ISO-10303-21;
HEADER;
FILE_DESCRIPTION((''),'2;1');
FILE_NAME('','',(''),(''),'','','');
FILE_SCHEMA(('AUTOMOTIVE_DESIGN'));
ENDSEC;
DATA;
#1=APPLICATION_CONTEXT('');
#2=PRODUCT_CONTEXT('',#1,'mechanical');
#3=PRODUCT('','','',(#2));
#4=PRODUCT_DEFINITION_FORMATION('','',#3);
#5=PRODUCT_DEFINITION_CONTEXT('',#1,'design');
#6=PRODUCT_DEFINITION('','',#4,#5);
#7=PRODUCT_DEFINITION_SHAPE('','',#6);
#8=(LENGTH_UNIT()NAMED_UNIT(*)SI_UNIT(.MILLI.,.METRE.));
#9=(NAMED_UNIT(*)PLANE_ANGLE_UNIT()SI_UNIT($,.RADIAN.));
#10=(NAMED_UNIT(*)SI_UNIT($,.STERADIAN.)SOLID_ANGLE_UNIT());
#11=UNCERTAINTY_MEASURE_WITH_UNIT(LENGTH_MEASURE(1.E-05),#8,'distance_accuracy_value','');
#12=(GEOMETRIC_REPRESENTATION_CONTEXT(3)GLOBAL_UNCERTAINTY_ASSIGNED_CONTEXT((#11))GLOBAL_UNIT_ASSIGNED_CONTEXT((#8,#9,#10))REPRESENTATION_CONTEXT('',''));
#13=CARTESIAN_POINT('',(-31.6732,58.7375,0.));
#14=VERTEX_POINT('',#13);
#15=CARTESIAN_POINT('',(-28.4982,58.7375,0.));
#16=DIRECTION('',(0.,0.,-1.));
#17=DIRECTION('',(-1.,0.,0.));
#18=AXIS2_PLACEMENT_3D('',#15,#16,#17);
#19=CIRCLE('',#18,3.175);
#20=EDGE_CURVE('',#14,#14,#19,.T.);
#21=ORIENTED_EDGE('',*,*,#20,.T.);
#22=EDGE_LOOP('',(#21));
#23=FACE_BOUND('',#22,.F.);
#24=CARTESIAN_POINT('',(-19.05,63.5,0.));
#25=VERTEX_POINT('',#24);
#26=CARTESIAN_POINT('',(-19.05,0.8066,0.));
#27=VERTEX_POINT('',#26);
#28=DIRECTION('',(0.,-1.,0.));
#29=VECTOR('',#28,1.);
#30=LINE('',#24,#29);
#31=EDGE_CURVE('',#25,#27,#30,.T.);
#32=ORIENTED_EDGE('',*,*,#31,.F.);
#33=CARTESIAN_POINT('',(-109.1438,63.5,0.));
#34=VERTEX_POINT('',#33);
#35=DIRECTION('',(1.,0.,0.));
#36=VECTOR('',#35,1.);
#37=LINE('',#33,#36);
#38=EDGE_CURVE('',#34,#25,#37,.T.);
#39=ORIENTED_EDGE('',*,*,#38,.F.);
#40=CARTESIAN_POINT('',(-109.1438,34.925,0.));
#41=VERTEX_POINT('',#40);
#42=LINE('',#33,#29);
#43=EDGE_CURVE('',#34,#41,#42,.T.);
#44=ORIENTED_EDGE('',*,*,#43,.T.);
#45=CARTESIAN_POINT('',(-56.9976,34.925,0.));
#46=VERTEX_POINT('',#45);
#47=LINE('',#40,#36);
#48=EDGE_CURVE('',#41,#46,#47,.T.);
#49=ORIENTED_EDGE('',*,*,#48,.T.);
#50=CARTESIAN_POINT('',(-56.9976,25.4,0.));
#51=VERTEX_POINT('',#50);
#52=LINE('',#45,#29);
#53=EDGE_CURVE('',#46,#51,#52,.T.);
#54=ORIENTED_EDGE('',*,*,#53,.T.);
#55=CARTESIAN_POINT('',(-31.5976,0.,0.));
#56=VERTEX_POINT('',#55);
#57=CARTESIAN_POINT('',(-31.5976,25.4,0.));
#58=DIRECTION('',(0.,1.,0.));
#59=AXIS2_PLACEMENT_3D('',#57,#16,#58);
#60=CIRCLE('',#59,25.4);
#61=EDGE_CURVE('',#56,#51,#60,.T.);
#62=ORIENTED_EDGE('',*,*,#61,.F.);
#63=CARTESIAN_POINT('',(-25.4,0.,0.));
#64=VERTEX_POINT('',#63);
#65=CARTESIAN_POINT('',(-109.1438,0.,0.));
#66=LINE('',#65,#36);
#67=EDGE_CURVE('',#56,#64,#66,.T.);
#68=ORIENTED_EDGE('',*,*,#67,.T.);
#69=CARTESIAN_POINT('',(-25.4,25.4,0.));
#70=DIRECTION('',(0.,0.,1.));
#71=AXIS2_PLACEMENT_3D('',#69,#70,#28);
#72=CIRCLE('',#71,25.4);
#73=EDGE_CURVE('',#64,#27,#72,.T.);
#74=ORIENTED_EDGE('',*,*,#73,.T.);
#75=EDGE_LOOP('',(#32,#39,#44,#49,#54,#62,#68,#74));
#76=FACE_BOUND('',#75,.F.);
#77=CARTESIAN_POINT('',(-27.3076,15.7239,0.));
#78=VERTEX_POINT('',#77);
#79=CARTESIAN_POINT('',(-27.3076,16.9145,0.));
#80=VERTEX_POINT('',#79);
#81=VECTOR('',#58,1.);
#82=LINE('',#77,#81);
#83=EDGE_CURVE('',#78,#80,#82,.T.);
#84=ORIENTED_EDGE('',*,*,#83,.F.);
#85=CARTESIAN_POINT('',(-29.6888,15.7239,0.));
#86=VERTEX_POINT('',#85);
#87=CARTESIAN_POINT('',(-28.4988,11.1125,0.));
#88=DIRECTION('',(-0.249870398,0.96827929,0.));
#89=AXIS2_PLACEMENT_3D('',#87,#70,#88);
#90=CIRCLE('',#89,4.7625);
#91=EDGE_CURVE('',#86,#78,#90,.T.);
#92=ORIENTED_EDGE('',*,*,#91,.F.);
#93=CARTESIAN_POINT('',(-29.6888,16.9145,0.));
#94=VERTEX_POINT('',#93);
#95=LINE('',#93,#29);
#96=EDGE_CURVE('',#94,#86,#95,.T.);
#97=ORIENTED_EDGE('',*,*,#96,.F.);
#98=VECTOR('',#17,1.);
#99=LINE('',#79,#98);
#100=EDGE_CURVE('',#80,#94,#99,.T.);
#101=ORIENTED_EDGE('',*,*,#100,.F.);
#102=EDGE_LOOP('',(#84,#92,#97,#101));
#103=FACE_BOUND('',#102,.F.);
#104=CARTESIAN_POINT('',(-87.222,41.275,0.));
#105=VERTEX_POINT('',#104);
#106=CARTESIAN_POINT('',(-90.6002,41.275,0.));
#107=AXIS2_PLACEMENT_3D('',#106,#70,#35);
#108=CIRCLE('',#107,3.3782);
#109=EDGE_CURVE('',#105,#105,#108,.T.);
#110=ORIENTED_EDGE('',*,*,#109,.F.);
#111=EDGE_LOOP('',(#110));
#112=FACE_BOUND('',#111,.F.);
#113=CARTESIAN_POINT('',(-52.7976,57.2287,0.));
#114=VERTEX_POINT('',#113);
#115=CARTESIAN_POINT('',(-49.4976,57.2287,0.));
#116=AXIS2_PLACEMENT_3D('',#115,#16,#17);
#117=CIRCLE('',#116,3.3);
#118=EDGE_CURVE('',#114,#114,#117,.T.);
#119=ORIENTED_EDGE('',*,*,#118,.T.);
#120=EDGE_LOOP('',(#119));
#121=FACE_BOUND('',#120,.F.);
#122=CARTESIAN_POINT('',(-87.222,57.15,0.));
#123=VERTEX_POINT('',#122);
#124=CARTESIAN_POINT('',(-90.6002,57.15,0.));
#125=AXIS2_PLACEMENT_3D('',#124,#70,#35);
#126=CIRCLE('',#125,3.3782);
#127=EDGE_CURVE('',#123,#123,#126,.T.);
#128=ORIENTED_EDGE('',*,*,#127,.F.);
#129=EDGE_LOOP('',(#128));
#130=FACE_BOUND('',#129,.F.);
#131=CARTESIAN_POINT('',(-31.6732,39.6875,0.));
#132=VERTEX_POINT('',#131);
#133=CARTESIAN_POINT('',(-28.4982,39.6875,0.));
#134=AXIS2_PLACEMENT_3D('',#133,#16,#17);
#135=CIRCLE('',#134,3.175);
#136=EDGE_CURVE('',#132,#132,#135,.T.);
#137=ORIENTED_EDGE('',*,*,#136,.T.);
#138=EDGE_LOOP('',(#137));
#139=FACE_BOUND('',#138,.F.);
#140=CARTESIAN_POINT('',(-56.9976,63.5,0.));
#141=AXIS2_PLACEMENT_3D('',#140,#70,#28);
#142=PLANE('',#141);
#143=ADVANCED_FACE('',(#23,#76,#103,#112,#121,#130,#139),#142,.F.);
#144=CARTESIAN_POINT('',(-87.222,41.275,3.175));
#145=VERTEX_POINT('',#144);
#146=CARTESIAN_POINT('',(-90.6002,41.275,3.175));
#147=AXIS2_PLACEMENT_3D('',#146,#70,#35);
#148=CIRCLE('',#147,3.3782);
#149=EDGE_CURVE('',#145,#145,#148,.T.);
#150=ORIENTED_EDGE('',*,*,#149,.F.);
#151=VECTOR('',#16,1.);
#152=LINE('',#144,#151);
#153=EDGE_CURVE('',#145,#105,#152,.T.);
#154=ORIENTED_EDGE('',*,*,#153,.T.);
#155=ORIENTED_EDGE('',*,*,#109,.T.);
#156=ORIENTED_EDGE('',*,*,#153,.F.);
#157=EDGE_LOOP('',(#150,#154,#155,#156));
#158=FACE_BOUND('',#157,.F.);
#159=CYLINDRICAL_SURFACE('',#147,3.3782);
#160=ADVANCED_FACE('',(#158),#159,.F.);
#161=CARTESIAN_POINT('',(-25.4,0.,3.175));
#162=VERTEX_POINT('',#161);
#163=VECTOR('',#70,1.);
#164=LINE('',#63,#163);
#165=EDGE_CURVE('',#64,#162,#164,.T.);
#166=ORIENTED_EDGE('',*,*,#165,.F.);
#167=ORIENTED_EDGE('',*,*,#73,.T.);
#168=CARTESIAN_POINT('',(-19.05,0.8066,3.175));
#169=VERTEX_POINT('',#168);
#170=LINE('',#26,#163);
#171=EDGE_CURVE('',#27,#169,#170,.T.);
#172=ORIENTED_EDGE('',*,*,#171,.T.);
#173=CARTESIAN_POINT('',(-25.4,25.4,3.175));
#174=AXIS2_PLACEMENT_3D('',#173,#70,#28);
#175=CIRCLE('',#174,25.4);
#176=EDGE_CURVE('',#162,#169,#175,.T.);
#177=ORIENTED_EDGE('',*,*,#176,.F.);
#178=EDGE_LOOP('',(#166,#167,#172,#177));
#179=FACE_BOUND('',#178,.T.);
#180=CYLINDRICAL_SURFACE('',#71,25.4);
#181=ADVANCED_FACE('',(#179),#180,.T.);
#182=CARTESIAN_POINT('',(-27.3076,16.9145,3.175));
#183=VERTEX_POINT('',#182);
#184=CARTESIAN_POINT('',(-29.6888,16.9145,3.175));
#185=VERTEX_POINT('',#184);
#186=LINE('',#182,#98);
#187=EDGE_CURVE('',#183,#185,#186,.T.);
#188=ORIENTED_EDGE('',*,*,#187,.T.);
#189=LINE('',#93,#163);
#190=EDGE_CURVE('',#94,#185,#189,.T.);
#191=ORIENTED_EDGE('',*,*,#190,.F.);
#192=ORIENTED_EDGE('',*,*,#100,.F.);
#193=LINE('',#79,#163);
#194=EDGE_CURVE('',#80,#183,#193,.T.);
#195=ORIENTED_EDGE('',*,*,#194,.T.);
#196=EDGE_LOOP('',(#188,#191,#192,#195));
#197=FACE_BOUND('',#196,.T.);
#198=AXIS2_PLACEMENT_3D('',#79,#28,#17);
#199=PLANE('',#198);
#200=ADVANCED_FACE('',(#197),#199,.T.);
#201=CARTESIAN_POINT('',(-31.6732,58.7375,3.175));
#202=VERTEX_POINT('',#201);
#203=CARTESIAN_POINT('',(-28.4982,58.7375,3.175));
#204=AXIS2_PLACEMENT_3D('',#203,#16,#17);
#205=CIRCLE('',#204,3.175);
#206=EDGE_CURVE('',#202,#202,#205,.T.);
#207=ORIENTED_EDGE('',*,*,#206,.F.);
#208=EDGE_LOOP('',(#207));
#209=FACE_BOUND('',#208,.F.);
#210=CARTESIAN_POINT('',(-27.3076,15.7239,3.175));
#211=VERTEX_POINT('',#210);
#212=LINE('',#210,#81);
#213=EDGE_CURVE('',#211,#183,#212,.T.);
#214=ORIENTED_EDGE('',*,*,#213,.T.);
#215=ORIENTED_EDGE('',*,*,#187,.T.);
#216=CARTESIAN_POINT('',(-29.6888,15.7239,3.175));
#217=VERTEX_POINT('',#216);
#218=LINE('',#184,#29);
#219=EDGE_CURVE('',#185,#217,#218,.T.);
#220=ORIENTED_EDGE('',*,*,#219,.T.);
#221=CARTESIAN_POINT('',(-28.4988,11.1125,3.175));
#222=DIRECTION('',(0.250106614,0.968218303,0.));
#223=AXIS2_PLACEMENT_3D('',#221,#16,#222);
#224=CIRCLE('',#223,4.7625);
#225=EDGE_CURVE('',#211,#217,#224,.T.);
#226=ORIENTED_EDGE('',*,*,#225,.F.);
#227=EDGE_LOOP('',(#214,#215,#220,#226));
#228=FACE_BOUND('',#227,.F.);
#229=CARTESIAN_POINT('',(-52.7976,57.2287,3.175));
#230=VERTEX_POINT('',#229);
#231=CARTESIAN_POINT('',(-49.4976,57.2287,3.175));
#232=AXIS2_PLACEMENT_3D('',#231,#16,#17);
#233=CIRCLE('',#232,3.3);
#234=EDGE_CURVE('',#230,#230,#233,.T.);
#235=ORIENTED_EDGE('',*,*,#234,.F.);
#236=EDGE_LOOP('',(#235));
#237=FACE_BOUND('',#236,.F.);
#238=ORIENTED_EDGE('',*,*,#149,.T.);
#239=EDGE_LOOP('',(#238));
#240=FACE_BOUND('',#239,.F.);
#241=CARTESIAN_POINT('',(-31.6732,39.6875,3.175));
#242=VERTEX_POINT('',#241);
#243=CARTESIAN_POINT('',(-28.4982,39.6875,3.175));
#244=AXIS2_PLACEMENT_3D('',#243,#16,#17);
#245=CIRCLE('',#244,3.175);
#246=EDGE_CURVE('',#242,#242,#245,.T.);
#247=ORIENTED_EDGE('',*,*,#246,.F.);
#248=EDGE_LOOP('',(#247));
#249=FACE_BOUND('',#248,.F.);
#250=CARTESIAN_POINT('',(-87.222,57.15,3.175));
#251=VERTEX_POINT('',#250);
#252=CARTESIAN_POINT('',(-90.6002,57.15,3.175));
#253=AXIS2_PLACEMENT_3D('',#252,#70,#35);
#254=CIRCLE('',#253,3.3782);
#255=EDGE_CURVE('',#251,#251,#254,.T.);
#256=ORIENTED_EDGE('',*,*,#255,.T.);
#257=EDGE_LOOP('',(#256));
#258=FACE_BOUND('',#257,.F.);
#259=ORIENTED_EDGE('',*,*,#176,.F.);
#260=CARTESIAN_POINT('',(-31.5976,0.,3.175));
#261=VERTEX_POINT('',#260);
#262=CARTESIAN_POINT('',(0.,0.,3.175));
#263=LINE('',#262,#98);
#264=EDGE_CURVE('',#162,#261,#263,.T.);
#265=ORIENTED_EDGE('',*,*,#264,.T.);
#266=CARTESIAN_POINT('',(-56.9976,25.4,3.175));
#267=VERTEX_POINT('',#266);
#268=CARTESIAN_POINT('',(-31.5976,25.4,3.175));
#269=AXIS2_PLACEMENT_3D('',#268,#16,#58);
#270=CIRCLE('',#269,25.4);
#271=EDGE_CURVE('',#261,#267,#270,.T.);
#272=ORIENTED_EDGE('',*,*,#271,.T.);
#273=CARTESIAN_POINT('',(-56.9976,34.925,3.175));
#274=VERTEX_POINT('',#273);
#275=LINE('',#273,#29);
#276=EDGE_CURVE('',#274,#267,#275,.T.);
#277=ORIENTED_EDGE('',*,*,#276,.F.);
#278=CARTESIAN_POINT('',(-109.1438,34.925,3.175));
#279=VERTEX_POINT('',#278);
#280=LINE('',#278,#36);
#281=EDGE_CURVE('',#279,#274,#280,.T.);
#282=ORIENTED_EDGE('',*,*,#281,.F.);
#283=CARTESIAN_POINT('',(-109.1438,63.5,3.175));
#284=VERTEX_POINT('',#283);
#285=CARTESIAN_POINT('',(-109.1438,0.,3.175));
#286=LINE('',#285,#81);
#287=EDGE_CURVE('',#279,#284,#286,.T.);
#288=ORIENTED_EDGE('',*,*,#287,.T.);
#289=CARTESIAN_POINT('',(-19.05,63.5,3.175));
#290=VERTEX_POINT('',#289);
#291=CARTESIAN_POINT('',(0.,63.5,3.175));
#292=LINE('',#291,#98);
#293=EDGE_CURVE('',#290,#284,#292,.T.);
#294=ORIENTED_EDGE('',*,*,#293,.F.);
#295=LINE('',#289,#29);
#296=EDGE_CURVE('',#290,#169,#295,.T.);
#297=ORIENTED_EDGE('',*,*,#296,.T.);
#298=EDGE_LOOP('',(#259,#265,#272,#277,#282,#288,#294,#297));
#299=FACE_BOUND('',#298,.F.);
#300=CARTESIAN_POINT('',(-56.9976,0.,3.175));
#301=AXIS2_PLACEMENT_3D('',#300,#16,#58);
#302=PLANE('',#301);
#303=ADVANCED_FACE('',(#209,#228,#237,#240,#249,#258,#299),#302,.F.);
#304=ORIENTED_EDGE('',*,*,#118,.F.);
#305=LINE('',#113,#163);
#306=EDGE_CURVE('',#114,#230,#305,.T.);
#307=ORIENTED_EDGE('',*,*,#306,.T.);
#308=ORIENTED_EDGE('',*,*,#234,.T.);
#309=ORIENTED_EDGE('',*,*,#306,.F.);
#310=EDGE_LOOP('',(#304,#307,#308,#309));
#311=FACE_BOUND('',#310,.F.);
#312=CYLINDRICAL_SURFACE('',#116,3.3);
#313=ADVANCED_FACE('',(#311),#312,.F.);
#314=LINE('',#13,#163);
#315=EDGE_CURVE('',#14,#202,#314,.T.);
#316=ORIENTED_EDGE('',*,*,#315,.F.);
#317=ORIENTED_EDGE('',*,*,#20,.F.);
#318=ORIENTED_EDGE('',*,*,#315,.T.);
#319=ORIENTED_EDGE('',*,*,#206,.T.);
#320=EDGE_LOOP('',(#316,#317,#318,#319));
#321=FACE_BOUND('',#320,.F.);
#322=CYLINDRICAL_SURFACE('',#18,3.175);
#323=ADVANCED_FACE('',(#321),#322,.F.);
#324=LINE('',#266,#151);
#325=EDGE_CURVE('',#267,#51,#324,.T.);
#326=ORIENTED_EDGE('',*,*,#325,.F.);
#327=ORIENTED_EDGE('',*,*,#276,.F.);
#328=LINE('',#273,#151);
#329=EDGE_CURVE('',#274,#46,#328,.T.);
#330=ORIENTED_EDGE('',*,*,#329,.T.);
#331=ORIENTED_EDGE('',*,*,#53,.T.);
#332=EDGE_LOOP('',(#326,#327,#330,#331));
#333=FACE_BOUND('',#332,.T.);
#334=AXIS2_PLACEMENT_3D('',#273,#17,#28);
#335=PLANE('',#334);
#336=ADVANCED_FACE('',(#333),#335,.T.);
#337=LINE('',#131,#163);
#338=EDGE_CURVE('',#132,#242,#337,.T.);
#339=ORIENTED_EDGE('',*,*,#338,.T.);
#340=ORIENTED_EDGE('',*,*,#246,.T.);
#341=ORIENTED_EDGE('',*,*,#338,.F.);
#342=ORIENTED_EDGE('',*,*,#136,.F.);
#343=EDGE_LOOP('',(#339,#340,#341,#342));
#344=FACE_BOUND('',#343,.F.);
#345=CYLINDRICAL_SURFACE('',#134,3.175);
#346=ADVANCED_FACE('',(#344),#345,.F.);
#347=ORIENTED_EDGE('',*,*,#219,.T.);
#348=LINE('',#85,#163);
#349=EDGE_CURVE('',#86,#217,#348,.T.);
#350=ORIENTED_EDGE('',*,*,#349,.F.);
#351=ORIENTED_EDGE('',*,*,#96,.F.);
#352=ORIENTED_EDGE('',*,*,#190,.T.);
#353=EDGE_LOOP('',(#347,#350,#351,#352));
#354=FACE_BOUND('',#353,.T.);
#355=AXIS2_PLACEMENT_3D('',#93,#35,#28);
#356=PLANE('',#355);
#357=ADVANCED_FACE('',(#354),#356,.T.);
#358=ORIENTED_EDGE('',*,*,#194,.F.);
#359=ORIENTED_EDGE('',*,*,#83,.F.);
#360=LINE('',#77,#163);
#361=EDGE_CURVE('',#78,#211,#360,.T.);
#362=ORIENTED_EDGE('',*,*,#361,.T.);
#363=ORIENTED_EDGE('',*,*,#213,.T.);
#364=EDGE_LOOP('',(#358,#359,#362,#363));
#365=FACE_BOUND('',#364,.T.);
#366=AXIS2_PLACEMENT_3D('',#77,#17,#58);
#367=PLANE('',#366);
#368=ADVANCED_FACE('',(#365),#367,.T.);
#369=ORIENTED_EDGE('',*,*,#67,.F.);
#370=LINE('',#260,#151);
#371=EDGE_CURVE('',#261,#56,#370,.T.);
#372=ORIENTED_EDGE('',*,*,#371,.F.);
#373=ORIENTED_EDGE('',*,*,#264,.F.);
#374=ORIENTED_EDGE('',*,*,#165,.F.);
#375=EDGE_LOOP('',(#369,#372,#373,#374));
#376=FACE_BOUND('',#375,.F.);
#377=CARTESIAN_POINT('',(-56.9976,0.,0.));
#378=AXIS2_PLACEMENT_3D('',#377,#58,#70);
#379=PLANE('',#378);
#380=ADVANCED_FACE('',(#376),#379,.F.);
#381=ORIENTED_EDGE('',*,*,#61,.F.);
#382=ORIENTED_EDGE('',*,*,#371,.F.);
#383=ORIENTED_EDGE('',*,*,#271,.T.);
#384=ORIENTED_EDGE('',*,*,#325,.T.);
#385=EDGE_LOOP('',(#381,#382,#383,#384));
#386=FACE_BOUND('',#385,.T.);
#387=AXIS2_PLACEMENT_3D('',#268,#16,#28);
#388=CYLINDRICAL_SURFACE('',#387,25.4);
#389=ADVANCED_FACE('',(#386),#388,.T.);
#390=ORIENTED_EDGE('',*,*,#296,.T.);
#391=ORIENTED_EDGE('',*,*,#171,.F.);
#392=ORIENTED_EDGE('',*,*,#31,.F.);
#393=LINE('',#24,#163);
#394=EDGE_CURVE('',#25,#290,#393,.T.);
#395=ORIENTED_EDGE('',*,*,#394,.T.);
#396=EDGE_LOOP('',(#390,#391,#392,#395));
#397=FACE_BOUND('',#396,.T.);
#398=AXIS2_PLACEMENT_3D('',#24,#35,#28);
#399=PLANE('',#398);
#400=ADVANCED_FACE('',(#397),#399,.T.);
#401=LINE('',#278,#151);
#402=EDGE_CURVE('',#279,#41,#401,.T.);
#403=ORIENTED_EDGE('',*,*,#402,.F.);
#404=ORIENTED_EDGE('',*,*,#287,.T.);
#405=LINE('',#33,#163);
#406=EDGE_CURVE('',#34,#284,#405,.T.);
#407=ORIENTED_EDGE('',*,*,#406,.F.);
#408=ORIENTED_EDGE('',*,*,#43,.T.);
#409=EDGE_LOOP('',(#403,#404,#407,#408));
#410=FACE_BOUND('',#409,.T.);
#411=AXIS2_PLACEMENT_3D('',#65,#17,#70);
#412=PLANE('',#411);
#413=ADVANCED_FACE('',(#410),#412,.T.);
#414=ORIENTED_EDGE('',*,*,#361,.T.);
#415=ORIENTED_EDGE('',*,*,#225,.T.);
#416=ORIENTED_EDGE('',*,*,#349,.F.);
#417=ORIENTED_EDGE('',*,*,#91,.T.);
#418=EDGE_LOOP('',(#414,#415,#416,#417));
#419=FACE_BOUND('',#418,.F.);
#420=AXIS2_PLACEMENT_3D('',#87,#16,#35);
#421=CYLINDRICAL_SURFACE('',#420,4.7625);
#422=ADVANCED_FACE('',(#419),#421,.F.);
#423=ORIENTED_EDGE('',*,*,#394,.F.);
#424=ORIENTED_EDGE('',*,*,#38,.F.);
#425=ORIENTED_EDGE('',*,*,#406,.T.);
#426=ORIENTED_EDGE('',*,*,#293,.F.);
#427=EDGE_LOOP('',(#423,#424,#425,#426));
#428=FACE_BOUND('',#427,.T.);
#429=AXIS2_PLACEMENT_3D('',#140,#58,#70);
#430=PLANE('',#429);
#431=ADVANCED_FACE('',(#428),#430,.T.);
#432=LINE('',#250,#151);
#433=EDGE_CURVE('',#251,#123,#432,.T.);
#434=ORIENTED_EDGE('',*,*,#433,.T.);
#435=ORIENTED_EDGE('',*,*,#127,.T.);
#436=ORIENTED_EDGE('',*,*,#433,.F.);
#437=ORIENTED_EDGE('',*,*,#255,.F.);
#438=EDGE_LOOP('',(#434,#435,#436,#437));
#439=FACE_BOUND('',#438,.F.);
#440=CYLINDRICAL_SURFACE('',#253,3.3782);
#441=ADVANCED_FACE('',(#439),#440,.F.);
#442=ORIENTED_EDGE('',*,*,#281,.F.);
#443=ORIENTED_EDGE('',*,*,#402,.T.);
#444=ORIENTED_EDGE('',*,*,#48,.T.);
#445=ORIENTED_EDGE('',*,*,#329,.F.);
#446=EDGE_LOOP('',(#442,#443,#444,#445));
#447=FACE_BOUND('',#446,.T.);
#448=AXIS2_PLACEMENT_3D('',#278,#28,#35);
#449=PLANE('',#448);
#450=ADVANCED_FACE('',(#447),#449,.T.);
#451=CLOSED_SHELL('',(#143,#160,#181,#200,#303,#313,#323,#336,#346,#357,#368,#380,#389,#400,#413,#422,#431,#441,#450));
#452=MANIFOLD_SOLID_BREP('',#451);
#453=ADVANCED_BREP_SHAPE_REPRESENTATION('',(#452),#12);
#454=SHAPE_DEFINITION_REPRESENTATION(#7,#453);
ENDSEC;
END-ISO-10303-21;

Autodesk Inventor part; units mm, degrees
ref_plane "YZ Plane" through (0, 0, 0) normal (1, 0, 0) x (0, 1, 0)
ref_plane "XZ Plane" through (0, 0, 0) normal (0, 1, 0) x (-1, 0, 0)
sketch "Sketch1" plane through (0, 0, 0) normal (0, 0, 1) x (1, 0, 0)
  line L0 (-56.9976, 63.5) -> (0, 63.5)
  line L1 (0, 63.5) -> (-7.493, 63.5)
  line L2 (-7.493, 63.5) -> (-7.493, 57.15)
  line L3 (-56.9976, 63.5) -> (-49.5046, 63.5)
  line L4 (-49.5046, 63.5) -> (-49.5046, 57.15)
  line L5 (-56.9976, 63.5) -> (-56.9976, 0)
  line L6 (-56.9976, 0) -> (0, 0)
  line L7 (0, 0) -> (0, 63.5)
  line L8 (-28.4988, 0) -> (-28.4988, 11.1125)
  circle A0 centre (-28.4988, 11.1125) radius 4.7625
  dimension "d3" = 7.493
  dimension "d4" = 6.35
  dimension "d5" = 7.493
  dimension "d19" = 6.35
  dimension "d60" = 63.5
  dimension "d61" = 11.1125
  dimension "d62" = 9.525
extrude "Plate6" add sketch "Sketch1" along normal blind 3.175
sketch "Sketch6" plane through (0, 0, 0) normal (0, 0, -1) x (-1, 0, 0)
  line L0 (56.9976, 63.5) -> (56.9976, 0) projected
  line L1 (28.4988, 11.1125) -> (27.3076, 11.1125)
  line L2 (28.4988, 11.1125) -> (29.6894, 11.1125)
  circle A0 centre (28.4988, 11.1125) radius 4.7625
  circle A1 centre (28.4988, 11.1125) radius 4.7625 projected
  line L3 (27.3076, 11.1125) -> (29.6888, 11.1125)
  line L4 (29.6888, 11.1125) -> (29.6888, 15.7239)
  line L5 (29.6888, 15.7239) -> (27.3076, 15.7239)
  line L6 (27.3076, 15.7239) -> (27.3076, 11.1125)
  line L7 (27.3076, 15.7239) -> (27.3076, 16.9145)
  line L8 (27.3076, 16.9145) -> (29.6888, 16.9145)
  line L9 (29.6888, 16.9145) -> (29.6888, 15.7239)
  point P0 (27.2012, 15.6948)
  point P1 (30.5454, 15.4129)
  dimension "d82" = 1.1906
  dimension "d86" = 2.3813
  dimension "d87" = 1.1906
extrude "Cut1" cut sketch "Sketch6" against normal blind 3.175 contours L7 L8 L9 A0 | A0 L5
sketch "Sketch7" plane through (-56.9976, 0, 0) normal (-1, 0, 0) x (0, 0, 1)
  line L0 (3.175, 0) -> (3.175, 63.5) projected
  line L1 (0, 63.5) -> (3.175, 63.5) projected
  line L2 (0, 63.5) -> (0, 0) projected
  line L3 (0, 0) -> (3.175, 0) projected
extrude "Extrusion2" add sketch "Sketch7" along normal blind 52.1462
sketch "Sketch8" plane through (0, 0, 3.175) normal (0, 0, 1) x (1, 0, 0)
  line L0 (0, 0) -> (-109.1438, 0) projected
  line L1 (-109.1438, 0) -> (-109.1438, 63.5) projected
  line L2 (-109.1438, 63.5) -> (-109.1438, 34.925)
  line L3 (-109.1438, 34.925) -> (-56.9976, 34.925)
  line L4 (-56.9976, 34.925) -> (-56.9976, 0)
  circle A0 centre (-75.5412, 57.15) radius 3.3782 projected
  circle A1 centre (-75.5412, 41.275) radius 3.3782 projected
  dimension "d71" = 28.575
  dimension "d72" = 52.1462
sketch "Sketch9" plane through (0, 0, 0) normal (0, 0, -1) x (-1, 0, 0)
  circle A0 centre (49.4976, 57.2287) radius 3.3
  circle A1 centre (7.4976, 57.2287) radius 3.3
extrude "Cut3" cut sketch "Sketch9" against normal blind 3.175
extrude "Cut4" cut sketch "Sketch8" against normal blind 3.175 contours L0 L1 L3 L4
sketch "Sketch10" plane through (0, 0, 3.175) normal (0, 0, 1) x (1, 0, 0)
  circle A0 centre (-90.6002, 57.15) radius 3.3782 projected
  circle A1 centre (-90.6002, 41.275) radius 3.3782 projected
extrude "Cut5" cut sketch "Sketch10" against normal blind 3.175
fillet "Fillet1" radius 25.4 2 edges at (-56.9976, 0, 1.5875) (0, 0, 1.5875)
sketch "Sketch11" plane through (0, 0, 3.175) normal (0, 0, 1) x (1, 0, 0)
  circle A0 centre (-90.6002, 57.15) radius 3.3782 projected
  circle A1 centre (-90.6002, 41.275) radius 3.3782 projected
  arc A2 (-25.4, 0) -> (0, 25.4) centre (-25.4, 25.4) ccw projected
  line L0 (0, 63.5) -> (0, 25.4) projected
  line L1 (-109.1438, 63.5) -> (0, 63.5) projected
  line L2 (-109.1438, 34.925) -> (-109.1438, 63.5) projected
  line L3 (-109.1438, 34.925) -> (-56.9976, 34.925) projected
  line L4 (-56.9976, 34.925) -> (-56.9976, 25.4) projected
  arc A3 (-56.9976, 25.4) -> (-31.5976, 0) centre (-31.5976, 25.4) ccw projected
  line L5 (-25.4, 0) -> (-31.5976, 0) projected
  circle A4 centre (-49.4976, 57.2287) radius 3.3 projected
  circle A5 centre (-7.4976, 57.2287) radius 3.3 projected
  line L6 (-29.6888, 15.7239) -> (-29.6888, 16.9145) projected
  line L7 (-29.6888, 16.9145) -> (-27.3076, 16.9145) projected
  line L8 (-27.3076, 16.9145) -> (-27.3076, 15.7239) projected
  line L9 (-27.3076, 15.7239) -> (-27.3088, 15.7239) projected
  arc A6 (-29.6888, 15.7239) -> (-27.3088, 15.7239) centre (-28.4988, 11.1125) ccw projected
  point P0 (0, 0)
ref_plane "Work Plane2" through (-28.4982, 16.9145, 3.175) normal (1, 0, 0) x (0, 0, -1)
sketch "Sketch12" plane through (0, 0, 0) normal (0, 0, -1) x (-1, 0, 0)
  arc A0 (0, 25.4) -> (25.4, 0) centre (25.4, 25.4) ccw projected
  line L0 (0, 63.5) -> (109.1438, 63.5) projected
  line L1 (0, 25.4) -> (0, 63.5) projected
  line L2 (27.3076, 16.9145) -> (29.6888, 16.9145) projected
  circle A1 centre (7.4976, 57.2287) radius 3.3 projected
  circle A2 centre (28.4982, 58.7375) radius 3.175 projected
  circle A3 centre (28.4982, 39.6875) radius 3.175 projected
  line L3 (19.05, 63.5) -> (19.05, 0.8066)
  point P0 (0, 0)
  dimension "d88" = 19.05
extrude "Cut6" cut sketch "Sketch12" against normal blind 3.175
equation "\"d67\" = Thickness"
equation "\"d75\" = Thickness"
equation "\"d77\" = Thickness"
equation "\"d79\" = Thickness"
equation "\"d89\" = Thickness"
equation "\"BendRadius\" = Thickness"
equation "\"BendReliefWidth\" = Thickness"
equation "\"BendReliefDepth\" = 0.5 * Thickness"
equation "\"CornerReliefSize\" = 4 * Thickness"
equation "\"MinimumRemnant\" = 2 * Thickness"
equation "\"TransitionRadius\" = BendRadius"
equation "\"JacobiRadiusSize\" = BendRadius"
equation "\"GapSize\" = Thickness"
equation "\"d8\" = BendRadius"
equation "\"d56\" = BendRadius"
equation "\"d63\" = BendRadius"
equation "\"Thickness\" = 3.175"
properties part number "M - arm mount" material "Steel"
